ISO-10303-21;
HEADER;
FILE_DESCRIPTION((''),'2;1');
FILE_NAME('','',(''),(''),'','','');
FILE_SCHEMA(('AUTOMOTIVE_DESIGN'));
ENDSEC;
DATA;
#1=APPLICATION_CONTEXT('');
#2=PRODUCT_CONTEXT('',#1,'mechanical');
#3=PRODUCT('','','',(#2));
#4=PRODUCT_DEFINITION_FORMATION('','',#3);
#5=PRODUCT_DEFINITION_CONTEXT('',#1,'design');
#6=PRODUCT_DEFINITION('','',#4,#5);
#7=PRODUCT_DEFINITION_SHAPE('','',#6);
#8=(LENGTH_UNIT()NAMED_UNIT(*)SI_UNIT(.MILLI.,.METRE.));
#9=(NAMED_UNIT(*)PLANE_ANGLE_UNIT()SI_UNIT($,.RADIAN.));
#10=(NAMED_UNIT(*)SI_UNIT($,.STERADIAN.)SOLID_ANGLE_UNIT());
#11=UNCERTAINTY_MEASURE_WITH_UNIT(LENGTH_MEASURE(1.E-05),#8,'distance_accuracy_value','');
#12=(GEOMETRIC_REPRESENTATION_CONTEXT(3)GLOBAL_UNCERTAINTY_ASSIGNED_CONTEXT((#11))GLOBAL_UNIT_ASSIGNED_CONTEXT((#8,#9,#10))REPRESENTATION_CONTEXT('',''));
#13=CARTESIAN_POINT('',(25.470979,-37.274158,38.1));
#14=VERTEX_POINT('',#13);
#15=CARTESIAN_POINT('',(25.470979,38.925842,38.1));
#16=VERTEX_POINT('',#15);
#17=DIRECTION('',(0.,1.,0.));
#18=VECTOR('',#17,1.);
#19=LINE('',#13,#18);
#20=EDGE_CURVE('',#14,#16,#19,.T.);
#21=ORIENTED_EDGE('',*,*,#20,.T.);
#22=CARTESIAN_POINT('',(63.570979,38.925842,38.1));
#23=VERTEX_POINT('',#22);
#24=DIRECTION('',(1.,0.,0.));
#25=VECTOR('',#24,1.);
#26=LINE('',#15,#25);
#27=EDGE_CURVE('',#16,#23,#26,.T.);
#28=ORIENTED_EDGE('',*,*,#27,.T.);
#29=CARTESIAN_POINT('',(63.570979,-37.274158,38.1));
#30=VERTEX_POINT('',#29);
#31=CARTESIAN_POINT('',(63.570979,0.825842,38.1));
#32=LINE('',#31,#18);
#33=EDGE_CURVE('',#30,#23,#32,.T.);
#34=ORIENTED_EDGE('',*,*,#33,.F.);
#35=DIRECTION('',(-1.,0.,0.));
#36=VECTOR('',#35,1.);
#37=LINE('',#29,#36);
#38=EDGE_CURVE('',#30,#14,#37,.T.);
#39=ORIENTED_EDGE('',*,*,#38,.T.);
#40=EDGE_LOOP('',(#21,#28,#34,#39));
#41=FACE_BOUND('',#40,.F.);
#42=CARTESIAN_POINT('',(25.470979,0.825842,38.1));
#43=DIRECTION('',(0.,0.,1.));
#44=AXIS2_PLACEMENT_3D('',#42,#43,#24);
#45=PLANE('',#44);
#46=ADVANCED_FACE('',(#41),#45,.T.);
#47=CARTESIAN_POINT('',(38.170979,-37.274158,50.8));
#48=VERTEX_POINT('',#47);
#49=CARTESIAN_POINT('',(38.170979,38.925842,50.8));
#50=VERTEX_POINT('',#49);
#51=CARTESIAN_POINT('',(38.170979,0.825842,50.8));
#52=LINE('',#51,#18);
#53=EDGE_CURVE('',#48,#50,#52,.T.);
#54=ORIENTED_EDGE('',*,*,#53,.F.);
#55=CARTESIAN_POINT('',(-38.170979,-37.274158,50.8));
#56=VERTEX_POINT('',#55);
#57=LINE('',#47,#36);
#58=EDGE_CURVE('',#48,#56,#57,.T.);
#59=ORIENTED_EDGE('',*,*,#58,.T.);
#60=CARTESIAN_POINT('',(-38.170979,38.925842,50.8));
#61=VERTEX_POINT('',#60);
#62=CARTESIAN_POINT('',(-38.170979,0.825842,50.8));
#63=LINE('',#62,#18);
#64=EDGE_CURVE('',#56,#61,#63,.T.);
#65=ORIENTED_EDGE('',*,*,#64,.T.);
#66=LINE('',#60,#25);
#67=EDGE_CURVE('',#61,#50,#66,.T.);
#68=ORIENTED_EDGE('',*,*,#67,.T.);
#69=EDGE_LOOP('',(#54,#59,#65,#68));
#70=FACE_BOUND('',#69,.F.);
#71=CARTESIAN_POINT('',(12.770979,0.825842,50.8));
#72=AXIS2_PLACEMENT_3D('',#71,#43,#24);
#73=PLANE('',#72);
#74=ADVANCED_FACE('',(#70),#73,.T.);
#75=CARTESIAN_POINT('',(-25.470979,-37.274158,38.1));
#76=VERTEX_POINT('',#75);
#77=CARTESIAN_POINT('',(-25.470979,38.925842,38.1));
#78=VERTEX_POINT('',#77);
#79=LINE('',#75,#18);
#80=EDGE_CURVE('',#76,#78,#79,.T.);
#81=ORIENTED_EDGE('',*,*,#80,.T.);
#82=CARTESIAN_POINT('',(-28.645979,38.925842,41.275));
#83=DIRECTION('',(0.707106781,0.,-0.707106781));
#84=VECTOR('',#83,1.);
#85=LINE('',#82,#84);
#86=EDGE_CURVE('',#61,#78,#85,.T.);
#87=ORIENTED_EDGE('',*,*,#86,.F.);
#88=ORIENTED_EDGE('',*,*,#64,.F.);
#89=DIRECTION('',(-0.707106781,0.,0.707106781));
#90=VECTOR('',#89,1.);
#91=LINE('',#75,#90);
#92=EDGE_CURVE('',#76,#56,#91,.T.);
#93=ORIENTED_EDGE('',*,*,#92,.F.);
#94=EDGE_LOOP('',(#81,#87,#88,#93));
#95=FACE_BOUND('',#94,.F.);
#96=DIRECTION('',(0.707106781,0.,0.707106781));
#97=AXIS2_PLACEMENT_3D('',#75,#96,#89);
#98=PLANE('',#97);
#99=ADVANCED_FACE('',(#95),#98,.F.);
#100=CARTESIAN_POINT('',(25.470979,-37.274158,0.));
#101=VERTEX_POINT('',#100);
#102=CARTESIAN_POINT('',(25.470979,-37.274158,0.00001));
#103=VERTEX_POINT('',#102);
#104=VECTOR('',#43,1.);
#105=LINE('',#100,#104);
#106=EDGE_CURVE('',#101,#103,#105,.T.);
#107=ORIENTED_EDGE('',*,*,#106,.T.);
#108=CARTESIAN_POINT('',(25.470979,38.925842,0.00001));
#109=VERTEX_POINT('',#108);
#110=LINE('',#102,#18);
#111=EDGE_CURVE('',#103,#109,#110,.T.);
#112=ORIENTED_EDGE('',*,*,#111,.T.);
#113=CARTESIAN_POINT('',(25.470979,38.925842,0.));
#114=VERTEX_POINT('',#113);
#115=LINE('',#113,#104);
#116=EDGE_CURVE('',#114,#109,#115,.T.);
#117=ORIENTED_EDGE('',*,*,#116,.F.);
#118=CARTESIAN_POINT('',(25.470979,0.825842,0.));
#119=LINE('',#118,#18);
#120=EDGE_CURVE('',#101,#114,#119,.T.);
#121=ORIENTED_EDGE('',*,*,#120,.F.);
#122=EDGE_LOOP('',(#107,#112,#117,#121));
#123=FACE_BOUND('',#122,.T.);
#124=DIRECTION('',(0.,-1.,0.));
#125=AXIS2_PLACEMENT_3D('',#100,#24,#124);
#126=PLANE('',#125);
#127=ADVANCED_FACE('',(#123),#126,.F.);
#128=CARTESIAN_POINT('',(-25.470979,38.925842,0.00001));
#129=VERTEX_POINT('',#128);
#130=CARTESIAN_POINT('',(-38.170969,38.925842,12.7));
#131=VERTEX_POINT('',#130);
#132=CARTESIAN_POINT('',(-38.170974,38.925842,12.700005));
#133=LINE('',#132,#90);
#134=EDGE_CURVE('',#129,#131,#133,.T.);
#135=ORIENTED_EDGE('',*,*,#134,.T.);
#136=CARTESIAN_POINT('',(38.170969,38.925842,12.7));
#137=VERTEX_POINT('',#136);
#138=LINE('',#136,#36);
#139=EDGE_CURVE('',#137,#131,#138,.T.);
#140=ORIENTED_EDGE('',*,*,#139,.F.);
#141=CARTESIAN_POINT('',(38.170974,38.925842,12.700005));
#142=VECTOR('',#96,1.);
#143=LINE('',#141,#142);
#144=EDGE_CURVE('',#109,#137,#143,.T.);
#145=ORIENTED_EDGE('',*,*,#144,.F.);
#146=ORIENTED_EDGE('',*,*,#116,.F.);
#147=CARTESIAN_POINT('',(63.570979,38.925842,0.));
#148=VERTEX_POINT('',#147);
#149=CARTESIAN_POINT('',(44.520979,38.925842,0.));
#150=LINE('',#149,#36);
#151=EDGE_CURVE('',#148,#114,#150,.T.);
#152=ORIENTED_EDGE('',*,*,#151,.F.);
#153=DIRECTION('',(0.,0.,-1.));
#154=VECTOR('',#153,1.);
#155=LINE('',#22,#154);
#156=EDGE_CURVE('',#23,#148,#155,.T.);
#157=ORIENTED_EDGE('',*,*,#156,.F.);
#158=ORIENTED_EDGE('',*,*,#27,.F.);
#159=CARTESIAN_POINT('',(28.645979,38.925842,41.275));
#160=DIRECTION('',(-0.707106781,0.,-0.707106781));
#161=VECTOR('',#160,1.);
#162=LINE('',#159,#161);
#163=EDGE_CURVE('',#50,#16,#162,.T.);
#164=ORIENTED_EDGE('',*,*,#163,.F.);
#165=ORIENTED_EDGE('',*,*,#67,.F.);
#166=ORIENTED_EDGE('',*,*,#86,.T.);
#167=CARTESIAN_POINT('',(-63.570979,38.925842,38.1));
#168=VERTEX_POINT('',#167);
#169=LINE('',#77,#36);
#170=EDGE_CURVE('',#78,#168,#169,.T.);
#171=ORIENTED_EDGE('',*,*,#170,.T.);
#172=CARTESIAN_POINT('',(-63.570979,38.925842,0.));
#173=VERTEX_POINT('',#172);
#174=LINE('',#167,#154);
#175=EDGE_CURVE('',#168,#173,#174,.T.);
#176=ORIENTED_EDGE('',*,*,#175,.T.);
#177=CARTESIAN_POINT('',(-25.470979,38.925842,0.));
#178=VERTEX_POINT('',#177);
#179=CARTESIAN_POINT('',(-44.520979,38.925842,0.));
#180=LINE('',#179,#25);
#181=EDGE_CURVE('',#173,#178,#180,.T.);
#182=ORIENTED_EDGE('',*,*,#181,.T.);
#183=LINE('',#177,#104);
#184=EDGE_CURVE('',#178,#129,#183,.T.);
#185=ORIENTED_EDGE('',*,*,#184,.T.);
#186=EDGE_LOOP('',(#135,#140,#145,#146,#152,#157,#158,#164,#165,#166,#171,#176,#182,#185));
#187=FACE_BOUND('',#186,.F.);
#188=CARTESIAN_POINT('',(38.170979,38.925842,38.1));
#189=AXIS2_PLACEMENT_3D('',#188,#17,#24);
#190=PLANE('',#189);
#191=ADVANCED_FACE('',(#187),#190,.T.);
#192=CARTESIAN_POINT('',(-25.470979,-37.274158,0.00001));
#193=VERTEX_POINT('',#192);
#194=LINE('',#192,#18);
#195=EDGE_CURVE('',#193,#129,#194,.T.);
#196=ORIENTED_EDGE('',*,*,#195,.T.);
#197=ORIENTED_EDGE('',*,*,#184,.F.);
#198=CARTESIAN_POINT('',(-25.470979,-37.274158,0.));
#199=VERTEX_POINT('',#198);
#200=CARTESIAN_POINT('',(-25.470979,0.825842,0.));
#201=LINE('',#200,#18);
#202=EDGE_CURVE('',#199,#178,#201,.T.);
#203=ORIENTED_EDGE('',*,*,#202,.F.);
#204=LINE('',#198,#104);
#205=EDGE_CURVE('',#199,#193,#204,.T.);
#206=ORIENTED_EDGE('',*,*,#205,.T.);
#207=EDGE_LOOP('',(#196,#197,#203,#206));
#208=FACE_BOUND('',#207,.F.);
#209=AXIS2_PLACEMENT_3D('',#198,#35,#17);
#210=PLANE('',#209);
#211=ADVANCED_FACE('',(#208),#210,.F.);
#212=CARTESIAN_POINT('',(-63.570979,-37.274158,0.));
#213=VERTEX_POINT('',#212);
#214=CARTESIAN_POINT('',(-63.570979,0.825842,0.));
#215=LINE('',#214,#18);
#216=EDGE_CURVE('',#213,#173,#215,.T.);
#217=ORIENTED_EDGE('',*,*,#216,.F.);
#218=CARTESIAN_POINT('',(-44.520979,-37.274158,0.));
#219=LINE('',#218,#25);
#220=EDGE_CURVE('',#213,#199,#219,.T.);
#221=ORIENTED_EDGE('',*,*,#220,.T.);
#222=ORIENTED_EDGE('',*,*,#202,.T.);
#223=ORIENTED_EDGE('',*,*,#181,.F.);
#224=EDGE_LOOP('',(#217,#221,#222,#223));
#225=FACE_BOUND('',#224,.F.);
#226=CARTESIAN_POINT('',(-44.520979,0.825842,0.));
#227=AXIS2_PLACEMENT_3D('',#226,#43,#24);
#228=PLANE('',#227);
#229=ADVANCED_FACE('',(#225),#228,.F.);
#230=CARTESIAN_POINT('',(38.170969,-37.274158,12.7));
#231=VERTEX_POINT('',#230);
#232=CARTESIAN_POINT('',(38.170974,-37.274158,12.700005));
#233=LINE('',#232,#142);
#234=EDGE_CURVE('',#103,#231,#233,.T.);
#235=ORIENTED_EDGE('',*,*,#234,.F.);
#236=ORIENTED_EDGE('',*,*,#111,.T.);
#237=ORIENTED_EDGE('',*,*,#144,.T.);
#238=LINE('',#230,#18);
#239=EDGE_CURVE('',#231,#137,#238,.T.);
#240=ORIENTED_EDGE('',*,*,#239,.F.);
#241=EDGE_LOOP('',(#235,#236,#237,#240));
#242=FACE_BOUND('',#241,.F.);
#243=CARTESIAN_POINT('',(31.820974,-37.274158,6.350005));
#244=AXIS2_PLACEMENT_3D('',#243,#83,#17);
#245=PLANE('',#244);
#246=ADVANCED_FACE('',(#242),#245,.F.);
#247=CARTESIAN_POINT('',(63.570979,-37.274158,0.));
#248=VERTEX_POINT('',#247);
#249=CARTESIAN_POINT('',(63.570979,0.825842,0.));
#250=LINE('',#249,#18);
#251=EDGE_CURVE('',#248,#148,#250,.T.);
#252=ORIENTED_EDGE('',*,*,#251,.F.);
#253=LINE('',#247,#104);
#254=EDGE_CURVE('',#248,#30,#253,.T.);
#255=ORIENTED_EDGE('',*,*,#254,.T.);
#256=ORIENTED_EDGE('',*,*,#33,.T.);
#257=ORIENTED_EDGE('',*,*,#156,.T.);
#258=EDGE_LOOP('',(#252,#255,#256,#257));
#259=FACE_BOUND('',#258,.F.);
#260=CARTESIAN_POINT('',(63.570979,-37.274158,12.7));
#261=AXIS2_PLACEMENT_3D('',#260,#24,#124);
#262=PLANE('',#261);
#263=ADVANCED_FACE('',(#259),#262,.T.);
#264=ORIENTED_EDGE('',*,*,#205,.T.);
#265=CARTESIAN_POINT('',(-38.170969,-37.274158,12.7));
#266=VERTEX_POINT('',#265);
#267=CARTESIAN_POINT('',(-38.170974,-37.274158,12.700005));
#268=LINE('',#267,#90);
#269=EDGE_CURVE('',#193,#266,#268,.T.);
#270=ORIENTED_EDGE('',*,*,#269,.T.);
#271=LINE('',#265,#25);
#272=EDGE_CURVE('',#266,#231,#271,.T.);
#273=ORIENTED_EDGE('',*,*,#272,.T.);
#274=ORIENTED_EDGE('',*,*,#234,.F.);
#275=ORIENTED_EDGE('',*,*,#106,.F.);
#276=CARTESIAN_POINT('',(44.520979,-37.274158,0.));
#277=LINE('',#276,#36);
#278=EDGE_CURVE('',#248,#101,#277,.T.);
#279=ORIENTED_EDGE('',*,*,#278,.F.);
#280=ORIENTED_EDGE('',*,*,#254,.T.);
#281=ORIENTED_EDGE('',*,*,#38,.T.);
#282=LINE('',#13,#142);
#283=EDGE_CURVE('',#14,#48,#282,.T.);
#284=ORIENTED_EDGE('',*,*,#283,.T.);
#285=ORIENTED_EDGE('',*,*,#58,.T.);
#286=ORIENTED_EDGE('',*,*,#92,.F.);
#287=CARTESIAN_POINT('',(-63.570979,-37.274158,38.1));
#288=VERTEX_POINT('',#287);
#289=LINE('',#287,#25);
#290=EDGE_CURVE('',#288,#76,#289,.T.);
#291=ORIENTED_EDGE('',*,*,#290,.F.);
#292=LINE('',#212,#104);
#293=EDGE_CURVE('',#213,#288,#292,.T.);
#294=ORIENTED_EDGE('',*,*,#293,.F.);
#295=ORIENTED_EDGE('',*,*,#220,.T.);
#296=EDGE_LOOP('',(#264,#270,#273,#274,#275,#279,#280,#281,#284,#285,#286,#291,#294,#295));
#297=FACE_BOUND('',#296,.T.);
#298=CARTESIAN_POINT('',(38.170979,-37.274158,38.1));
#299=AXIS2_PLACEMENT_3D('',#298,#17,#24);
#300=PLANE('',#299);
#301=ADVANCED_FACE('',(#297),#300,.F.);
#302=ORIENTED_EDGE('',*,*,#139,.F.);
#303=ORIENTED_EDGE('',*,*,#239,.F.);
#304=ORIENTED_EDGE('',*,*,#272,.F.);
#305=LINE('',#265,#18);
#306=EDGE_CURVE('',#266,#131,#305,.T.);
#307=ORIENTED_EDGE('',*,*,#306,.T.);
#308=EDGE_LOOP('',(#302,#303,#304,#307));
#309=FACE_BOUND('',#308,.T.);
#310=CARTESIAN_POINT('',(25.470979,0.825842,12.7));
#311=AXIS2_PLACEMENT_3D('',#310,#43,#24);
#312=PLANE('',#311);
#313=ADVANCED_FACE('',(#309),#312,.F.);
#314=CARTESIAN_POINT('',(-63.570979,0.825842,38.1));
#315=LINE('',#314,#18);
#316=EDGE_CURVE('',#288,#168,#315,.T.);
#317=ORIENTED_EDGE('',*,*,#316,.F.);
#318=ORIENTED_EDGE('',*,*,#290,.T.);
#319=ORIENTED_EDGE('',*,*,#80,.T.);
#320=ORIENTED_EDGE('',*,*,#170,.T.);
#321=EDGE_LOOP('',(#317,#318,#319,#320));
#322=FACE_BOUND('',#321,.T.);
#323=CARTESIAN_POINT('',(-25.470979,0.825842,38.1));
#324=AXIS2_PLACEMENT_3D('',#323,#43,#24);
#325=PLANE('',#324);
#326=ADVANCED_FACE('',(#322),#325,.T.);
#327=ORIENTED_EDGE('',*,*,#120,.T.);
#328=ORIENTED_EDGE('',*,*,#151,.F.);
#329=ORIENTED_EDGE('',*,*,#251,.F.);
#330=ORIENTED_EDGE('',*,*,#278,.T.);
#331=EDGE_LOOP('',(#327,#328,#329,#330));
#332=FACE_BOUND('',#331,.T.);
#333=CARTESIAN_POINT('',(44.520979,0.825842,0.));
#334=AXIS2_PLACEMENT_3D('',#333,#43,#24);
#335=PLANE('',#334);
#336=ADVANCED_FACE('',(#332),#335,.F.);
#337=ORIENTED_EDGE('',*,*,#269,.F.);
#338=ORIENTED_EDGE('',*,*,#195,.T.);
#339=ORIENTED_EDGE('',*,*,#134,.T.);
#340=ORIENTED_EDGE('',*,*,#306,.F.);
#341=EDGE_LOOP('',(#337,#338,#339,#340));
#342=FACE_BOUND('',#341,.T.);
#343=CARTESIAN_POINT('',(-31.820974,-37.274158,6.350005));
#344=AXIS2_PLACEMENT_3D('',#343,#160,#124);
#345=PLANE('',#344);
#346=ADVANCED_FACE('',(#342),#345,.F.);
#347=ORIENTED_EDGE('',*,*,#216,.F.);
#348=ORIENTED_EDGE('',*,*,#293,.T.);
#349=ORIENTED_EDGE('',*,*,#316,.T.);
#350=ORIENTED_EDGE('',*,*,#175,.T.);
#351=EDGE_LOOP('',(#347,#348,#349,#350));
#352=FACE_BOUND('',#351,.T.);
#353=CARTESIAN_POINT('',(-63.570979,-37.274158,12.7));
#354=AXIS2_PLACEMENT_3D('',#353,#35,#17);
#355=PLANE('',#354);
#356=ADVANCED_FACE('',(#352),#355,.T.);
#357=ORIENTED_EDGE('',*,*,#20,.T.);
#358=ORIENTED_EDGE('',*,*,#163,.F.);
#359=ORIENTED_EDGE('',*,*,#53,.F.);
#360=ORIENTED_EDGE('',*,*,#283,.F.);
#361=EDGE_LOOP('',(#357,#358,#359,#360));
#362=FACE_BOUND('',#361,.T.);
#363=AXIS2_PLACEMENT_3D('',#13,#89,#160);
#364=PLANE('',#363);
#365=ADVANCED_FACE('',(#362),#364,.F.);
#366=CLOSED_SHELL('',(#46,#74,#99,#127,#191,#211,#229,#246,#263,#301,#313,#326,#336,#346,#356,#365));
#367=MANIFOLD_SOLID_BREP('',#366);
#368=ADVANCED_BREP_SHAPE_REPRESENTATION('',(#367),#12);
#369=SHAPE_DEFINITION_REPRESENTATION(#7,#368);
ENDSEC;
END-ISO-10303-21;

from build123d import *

# Parameters (mm, degrees)
F0_W     = 38.1
F0_H     = 76.2
F1_DEPTH = 12.7
F2_SIZE  = 12.69999
F3_W     = 76.2
F3_H     = 76.2
F4_DEPTH = 25.4
F5_W     = 50.8
F5_H     = 76.2
F6_DEPTH = 12.7
F8_DEPTH = 76.201


# Not quite as in the source:
# - a fillet or chamfer is up to 0.001 mm smaller than in the source, because OpenCascade refuses the exact size


with BuildPart() as f1:
    # F0 (on Top) → F1 (new body)
    with BuildSketch(Plane.XY):
        with Locations((-44.5209794172, 0.8258419111)):
            Rectangle(F0_W, F0_H)
    extrude(amount=F1_DEPTH)

    # F2 (size 12.7 in the source; OpenCascade refuses exactly that, so slightly less here)
    f2_edges = [f1.edges().sort_by_distance(p)[0] for p in [
        (-25.470979, 0.825842, 12.7),
    ]]
    chamfer(f2_edges, length=F2_SIZE)

    # F3 (on face) → F4 (join)
    with BuildSketch(Plane.XY.offset(12.7)):
        with Locations((-25.4709794172, 0.8258419111)):
            Rectangle(F3_W, F3_H)
    extrude(amount=F4_DEPTH)

    # F5 (on face) → F6 (join)
    with BuildSketch(Plane.XY.offset(38.1)):
        with Locations((-12.7709794172, 0.8258419111)):
            Rectangle(F5_W, F5_H)
    extrude(amount=F6_DEPTH)

    # F7 (on face) → F8 (cut, through all)
    with BuildSketch(Plane.XZ.offset(37.2741580889)):
        Polygon((-38.1709794172, 50.8), (-38.1709794172, 38.1), (-25.4709794172, 38.1), align=None)
    extrude(amount=-F8_DEPTH, mode=Mode.SUBTRACT)

    # F9: F1 across plane


with BuildPart() as f1_1:
    add(f1.part)
    add(f1.part.mirror(Plane.YZ))


solid = f1_1.part
